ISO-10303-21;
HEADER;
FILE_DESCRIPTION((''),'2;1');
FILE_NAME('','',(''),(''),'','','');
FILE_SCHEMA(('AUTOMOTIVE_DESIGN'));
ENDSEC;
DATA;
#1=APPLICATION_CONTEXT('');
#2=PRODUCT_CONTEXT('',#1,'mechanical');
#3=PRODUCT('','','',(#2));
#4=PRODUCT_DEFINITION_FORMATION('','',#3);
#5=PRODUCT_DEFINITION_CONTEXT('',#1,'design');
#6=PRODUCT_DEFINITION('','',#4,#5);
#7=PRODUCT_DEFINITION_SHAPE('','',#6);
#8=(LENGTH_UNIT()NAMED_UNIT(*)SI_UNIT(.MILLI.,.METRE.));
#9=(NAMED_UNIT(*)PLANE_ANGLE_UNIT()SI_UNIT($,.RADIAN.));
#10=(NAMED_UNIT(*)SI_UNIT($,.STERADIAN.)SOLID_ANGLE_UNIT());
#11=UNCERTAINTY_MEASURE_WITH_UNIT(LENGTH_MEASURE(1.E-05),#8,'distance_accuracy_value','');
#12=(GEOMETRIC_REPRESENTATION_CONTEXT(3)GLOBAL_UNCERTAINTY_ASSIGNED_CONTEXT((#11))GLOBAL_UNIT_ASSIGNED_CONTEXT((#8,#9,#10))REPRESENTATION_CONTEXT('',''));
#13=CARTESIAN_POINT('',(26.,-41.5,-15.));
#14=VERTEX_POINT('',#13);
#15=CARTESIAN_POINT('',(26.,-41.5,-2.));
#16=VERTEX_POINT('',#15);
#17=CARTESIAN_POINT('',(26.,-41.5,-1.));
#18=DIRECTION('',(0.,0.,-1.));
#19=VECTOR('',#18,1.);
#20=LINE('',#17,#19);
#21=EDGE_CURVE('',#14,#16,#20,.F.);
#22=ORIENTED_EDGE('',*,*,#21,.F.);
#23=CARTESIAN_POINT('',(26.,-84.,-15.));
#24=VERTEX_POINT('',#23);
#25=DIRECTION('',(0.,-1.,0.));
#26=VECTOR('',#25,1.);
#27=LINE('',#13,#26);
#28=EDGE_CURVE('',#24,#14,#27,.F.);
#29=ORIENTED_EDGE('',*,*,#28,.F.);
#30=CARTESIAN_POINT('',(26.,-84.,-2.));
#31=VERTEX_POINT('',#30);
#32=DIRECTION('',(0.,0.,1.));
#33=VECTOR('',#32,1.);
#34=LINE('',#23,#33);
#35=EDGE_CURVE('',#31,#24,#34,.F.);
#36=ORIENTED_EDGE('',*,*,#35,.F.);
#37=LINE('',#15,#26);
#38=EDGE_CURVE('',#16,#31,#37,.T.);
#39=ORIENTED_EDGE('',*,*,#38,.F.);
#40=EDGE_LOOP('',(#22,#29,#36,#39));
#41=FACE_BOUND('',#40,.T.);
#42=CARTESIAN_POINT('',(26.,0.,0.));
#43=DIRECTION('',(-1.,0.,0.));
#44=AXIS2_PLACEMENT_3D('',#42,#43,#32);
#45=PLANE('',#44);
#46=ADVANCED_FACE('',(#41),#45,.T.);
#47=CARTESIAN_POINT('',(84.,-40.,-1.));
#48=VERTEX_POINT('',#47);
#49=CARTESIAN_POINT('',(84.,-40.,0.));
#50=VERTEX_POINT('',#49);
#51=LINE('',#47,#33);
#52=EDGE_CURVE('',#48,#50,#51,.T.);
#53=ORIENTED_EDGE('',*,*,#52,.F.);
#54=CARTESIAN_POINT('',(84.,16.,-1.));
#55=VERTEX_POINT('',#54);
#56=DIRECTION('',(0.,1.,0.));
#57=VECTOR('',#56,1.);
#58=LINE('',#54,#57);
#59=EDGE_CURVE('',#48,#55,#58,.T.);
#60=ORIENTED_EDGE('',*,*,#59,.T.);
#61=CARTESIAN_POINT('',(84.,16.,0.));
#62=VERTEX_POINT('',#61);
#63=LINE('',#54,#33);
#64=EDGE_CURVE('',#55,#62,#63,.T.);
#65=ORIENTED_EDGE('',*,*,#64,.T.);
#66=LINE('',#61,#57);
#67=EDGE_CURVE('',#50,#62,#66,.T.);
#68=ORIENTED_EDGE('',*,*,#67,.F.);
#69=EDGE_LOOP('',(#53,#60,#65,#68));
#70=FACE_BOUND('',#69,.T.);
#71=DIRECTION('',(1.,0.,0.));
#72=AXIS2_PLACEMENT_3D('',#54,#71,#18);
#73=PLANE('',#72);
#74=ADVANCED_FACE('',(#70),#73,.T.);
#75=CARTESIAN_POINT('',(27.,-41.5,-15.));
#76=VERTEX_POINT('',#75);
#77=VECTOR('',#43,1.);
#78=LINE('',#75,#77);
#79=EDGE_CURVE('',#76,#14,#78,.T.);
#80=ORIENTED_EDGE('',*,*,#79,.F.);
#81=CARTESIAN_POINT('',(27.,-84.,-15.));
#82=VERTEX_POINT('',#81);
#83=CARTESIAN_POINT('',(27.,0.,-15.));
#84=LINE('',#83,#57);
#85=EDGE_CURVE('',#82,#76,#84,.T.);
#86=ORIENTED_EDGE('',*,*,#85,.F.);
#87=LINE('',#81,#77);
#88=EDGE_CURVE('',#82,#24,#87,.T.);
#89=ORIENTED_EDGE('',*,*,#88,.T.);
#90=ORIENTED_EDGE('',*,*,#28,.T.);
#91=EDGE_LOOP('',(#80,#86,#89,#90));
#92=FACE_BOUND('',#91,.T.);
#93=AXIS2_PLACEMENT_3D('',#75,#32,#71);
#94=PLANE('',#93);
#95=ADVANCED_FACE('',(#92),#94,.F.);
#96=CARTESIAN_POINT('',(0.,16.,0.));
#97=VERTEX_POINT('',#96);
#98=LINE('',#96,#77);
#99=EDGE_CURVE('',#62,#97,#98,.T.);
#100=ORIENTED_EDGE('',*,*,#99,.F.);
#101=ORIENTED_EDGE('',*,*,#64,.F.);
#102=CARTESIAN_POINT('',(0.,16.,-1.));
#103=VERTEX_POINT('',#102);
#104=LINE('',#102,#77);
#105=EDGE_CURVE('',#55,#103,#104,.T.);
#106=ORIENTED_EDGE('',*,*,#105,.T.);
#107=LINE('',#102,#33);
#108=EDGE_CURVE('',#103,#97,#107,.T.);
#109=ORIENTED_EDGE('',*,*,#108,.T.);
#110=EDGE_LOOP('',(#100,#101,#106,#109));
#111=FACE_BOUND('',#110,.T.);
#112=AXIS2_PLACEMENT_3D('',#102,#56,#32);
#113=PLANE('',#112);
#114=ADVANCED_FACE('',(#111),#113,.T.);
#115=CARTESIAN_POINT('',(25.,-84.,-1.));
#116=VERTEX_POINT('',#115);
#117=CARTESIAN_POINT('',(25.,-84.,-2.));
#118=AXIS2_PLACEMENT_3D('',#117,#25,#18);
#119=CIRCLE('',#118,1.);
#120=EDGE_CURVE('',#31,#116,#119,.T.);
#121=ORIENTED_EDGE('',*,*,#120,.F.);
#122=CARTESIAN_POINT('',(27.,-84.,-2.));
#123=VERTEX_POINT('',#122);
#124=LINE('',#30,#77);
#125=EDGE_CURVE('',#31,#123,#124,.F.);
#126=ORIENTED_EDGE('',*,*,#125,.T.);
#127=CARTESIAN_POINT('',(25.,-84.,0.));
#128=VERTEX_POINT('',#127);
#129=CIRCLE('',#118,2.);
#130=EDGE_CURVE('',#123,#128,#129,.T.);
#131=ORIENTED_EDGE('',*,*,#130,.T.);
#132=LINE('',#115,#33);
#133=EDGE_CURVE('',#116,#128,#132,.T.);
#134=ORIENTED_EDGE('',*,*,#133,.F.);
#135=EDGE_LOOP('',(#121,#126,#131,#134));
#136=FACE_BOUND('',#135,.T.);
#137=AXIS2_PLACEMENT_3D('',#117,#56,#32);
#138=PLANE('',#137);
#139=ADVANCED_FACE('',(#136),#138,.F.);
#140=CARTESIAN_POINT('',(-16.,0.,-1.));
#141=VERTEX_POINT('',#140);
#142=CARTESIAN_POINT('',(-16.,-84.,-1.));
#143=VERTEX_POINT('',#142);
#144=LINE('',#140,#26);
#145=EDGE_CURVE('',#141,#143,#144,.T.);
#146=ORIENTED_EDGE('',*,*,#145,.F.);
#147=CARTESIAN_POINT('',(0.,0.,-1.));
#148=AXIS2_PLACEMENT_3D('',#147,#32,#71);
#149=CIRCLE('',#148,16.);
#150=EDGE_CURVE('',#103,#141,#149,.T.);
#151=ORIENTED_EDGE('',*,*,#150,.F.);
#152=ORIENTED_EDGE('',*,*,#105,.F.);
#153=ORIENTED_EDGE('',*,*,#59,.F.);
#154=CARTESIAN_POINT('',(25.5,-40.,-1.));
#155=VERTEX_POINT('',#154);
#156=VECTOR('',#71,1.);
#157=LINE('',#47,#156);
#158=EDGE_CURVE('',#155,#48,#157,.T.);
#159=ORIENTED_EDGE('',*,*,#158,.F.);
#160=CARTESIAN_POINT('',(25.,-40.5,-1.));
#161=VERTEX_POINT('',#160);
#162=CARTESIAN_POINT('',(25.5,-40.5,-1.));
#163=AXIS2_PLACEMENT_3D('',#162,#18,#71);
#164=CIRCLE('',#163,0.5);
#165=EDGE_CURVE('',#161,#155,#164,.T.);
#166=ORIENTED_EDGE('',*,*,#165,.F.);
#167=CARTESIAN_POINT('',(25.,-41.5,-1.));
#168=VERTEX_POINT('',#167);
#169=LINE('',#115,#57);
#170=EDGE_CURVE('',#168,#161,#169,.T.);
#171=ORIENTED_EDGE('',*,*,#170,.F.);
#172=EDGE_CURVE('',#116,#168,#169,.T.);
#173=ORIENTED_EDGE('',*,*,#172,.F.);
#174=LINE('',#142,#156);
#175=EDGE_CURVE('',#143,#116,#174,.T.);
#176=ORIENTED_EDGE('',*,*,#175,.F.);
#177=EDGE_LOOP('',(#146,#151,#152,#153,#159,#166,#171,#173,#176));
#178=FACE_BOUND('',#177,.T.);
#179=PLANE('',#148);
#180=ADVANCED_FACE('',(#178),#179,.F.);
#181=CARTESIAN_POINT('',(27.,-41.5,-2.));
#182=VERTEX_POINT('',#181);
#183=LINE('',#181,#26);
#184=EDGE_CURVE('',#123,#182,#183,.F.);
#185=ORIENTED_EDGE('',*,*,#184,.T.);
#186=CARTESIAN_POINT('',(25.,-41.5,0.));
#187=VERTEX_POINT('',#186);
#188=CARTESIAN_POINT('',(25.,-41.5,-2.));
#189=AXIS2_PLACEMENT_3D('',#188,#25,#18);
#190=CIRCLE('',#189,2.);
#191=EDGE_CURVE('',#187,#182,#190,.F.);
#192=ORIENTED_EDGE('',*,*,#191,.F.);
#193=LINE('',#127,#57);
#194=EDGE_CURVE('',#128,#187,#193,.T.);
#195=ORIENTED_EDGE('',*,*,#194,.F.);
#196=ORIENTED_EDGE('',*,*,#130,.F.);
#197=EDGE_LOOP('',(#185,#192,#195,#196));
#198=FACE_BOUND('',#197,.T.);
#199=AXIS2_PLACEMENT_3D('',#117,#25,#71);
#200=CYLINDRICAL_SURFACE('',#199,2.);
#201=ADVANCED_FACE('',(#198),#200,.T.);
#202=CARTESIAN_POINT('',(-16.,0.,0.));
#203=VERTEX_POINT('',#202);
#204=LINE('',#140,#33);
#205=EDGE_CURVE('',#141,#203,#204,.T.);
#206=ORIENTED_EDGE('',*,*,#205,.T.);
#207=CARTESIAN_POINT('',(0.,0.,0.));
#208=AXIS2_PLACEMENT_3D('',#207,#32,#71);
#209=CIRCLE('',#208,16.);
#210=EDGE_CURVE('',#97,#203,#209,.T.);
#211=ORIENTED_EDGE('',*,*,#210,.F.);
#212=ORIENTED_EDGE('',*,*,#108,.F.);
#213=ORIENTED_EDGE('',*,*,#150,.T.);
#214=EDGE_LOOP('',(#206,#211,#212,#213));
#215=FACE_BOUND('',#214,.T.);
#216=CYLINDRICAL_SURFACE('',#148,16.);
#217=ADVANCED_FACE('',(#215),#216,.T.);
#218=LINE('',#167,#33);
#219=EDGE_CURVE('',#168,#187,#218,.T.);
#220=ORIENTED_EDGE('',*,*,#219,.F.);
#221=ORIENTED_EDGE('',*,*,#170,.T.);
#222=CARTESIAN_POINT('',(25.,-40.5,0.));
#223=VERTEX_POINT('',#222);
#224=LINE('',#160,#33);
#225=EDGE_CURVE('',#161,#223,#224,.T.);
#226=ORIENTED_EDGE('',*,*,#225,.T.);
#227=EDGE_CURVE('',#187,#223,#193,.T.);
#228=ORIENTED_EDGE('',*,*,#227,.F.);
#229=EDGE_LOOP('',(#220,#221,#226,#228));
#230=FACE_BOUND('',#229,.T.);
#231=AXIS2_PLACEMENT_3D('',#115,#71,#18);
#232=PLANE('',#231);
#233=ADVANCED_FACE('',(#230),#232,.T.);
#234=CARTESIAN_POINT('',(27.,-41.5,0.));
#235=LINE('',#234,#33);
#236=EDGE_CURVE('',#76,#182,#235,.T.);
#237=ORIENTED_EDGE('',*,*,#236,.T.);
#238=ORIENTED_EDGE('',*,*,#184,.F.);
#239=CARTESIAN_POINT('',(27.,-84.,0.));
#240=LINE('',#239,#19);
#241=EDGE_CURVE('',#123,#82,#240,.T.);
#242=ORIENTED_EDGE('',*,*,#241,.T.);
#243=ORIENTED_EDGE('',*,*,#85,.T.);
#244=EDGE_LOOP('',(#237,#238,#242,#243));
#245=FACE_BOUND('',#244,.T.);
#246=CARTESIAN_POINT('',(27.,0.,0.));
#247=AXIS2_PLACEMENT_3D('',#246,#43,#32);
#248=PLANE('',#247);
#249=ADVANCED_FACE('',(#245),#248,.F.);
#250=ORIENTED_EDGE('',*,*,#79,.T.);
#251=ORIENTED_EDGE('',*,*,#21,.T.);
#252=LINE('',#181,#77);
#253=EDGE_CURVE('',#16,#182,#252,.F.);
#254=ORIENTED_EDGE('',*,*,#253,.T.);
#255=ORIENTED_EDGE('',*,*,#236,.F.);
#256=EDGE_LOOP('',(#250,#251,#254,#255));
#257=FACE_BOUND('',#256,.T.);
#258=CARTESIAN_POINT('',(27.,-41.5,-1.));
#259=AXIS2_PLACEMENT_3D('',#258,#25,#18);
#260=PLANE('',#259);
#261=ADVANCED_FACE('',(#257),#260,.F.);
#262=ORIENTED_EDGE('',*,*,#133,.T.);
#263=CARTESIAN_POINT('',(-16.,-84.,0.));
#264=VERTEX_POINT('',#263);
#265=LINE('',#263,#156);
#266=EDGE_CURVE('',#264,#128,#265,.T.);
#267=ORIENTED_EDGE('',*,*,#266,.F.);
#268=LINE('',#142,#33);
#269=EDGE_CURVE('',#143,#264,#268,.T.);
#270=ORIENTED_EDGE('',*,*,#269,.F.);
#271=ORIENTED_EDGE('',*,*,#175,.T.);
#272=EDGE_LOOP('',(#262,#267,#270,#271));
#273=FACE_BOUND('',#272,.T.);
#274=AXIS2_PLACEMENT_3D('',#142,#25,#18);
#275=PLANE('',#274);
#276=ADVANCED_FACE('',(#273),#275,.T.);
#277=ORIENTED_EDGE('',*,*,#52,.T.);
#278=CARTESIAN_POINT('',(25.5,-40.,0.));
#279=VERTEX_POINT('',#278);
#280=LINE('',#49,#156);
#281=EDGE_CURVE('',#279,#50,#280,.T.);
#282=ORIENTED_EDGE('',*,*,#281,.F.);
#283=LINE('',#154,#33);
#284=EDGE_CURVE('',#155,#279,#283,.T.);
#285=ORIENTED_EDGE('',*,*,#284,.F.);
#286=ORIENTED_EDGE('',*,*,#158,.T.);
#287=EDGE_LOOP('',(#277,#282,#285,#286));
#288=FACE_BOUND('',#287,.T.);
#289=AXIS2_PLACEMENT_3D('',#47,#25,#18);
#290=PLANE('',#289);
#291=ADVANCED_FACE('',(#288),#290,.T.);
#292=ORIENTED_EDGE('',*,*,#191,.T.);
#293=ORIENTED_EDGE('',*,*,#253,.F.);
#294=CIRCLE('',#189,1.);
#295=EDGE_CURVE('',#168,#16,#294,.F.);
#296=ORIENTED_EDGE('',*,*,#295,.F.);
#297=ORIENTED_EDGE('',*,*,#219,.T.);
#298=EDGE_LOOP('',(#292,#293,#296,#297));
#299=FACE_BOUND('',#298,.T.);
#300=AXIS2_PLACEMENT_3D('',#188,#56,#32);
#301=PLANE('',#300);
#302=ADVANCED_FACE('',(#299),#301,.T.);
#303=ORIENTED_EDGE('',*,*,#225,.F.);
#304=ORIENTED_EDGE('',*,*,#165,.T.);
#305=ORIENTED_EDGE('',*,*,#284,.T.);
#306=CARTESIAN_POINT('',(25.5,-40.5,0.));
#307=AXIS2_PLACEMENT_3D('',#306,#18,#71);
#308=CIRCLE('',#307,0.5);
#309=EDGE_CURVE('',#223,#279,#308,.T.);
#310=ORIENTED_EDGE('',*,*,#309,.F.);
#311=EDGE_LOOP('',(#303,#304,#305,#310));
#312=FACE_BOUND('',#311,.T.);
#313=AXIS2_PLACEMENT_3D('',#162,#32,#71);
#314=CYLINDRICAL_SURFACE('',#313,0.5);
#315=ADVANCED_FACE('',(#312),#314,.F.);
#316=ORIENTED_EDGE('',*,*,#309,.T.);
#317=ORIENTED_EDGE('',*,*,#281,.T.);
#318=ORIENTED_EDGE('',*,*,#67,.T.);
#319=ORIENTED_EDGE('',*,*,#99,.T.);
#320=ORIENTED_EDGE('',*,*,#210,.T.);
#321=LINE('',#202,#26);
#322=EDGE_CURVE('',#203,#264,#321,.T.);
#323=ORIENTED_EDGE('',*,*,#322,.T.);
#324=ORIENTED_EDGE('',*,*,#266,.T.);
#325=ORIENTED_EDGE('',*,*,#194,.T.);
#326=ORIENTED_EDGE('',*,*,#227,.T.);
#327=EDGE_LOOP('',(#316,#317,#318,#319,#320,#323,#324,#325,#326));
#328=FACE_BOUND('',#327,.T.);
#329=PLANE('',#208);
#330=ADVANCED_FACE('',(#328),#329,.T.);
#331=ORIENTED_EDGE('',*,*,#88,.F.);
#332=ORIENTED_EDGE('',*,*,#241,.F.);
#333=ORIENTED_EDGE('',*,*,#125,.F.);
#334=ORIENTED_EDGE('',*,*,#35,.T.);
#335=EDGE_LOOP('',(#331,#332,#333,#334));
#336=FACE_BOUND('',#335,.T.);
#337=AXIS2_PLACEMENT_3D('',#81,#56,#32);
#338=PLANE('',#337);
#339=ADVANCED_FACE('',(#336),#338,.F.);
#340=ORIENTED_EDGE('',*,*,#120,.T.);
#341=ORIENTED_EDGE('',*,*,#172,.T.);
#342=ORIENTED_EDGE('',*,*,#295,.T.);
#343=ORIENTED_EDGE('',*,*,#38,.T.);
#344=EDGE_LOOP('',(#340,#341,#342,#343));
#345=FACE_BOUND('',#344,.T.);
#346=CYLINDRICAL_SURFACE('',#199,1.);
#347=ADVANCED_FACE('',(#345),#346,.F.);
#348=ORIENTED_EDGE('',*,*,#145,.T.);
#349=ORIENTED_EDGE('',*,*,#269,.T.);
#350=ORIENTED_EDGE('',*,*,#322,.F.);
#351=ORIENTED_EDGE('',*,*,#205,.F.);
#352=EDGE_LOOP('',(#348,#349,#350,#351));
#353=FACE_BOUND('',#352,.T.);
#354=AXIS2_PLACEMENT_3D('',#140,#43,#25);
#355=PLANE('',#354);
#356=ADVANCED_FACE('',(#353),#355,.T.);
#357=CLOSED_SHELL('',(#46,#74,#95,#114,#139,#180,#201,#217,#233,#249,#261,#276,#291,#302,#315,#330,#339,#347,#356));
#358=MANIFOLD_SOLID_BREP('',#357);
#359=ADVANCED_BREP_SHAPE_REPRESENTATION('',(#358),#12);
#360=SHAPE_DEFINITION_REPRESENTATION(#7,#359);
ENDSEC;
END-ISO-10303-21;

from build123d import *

# Parameters (mm, degrees)
BASE_FLANGE1_DEPTH = 1
EDGE_FLANGE2_DEPTH = 42.5


# Sheet-metal steps are written as plain solids
with BuildPart() as part:
    # Sketch1 → Base-Flange1 (new body)
    with BuildSketch(Plane.XY):
        with BuildLine():
            Line((-16, 0), (-16, -84))
            Line((-16, -84), (25, -84))
            Line((25, -84), (25, -40.5))
            ThreePointArc((25, -40.5), (25.146446609, -40.146446609), (25.5, -40))
            Line((25.5, -40), (84, -40))
            Line((84, -40), (84, 16))
            Line((84, 16), (0, 16))
            ThreePointArc((0, 16), (-11.313708499, 11.313708499), (-16, 0))
        make_face()
    extrude(amount=-BASE_FLANGE1_DEPTH)

    # Edge-Flange2 section (across the edge) → Edge-Flange2 (add)
    with BuildSketch(Plane(origin=(26, -41.5, -1), x_dir=(-1, 0, 0), z_dir=(0, -1, 0))):
        with BuildLine():
            Line((-1, 1), (-1, 14))
            Line((-1, 14), (0, 14))
            Line((0, 14), (0, 1))
            ThreePointArc((0, 1), (0.292893219, 0.292893219), (1, 0))
            Line((1, 0), (1, -1))
            ThreePointArc((1, -1), (-0.414213562, -0.414213562), (-1, 1))
        make_face()
    extrude(amount=EDGE_FLANGE2_DEPTH)


solid = part.part
